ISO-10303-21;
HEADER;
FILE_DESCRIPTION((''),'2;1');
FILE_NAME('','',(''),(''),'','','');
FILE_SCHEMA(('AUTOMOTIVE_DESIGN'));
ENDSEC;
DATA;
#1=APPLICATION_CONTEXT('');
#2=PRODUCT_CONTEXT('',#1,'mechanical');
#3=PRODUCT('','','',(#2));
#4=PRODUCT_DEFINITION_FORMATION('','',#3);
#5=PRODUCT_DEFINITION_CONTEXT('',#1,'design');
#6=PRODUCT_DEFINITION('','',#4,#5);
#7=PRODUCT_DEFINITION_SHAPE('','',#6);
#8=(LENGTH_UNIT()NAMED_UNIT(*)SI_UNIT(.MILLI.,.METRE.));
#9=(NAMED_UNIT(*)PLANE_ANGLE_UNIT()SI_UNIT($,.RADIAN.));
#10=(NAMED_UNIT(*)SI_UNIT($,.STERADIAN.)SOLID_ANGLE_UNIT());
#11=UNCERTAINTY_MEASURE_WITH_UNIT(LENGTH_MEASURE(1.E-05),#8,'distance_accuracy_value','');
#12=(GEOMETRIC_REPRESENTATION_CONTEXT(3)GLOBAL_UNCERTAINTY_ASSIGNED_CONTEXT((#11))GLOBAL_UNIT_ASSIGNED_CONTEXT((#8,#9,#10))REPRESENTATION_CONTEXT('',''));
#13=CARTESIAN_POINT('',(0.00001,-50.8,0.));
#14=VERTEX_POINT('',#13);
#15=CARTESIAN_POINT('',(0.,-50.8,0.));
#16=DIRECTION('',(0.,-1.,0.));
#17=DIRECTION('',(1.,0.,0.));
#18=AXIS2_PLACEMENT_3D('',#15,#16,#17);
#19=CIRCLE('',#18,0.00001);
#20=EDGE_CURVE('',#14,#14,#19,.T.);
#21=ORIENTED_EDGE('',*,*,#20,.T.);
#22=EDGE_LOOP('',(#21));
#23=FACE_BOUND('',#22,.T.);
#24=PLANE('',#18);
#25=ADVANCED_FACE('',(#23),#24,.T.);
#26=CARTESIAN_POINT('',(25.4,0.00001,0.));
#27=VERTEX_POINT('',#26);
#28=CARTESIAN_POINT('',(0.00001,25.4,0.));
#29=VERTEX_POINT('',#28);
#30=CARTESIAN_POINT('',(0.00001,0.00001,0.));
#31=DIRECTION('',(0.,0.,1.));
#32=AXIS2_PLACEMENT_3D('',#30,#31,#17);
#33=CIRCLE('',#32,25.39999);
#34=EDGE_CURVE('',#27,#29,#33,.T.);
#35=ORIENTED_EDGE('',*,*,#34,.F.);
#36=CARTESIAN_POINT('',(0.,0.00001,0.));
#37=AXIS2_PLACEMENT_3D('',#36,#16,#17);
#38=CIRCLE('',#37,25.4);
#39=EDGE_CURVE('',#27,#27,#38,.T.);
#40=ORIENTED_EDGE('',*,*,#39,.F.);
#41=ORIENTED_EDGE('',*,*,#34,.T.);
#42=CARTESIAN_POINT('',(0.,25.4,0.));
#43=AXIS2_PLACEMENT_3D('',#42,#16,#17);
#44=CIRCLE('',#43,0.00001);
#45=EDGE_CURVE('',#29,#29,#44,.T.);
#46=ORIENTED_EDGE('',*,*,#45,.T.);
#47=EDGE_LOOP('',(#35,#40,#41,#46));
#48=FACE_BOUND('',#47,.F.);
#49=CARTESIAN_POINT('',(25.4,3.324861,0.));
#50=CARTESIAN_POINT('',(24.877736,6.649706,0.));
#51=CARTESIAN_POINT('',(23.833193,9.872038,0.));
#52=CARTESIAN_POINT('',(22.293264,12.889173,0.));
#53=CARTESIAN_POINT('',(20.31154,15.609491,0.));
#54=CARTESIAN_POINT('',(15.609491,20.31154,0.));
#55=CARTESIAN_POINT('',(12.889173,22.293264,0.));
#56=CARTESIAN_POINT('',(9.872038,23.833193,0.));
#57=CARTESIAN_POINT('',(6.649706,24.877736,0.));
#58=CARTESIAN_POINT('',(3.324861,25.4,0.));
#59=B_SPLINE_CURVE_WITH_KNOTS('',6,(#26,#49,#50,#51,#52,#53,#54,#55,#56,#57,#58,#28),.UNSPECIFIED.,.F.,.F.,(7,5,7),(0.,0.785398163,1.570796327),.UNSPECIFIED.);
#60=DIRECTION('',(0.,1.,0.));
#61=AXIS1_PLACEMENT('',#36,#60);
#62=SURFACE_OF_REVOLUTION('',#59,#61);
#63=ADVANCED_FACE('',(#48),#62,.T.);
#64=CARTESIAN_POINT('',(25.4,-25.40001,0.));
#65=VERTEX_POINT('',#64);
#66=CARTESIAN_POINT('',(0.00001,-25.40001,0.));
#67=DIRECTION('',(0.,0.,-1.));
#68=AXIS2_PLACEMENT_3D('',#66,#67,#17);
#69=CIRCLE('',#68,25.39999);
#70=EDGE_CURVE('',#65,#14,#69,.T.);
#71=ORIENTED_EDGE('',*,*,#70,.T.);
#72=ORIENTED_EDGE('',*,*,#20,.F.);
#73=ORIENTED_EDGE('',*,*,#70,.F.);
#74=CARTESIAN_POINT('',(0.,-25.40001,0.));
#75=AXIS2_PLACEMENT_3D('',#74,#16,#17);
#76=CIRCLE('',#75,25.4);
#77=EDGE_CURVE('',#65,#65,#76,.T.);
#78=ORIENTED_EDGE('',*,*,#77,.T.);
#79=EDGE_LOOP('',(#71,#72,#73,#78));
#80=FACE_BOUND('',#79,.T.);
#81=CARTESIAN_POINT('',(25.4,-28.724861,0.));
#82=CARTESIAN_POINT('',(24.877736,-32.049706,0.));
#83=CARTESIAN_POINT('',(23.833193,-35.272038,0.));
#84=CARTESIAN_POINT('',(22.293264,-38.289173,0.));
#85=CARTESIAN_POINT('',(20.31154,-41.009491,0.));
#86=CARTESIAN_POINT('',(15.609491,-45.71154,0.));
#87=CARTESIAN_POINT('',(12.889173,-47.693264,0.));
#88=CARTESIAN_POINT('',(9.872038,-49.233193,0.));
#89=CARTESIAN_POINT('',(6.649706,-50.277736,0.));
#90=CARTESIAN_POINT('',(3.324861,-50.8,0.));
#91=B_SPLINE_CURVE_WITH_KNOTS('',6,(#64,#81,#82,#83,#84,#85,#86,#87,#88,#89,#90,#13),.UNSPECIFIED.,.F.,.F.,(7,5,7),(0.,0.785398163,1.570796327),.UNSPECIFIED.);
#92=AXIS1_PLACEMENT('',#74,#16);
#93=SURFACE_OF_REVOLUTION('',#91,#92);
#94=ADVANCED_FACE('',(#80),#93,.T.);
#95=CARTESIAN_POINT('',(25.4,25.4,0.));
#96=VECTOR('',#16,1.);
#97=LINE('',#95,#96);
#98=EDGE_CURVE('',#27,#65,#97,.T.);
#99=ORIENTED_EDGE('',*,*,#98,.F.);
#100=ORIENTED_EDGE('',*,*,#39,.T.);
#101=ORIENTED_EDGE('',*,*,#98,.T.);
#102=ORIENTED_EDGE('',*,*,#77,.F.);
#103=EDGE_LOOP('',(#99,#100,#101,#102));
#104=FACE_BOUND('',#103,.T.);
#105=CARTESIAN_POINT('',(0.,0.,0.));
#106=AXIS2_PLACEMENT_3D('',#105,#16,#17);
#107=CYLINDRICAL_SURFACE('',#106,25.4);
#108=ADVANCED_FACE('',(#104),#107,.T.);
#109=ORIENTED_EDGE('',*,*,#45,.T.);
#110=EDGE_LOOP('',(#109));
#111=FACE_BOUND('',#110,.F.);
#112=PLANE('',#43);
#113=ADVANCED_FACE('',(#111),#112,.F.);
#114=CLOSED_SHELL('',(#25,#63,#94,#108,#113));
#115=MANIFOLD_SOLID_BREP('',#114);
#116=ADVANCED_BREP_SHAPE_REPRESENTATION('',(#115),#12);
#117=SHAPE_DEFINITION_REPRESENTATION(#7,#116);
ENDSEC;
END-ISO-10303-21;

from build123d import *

# Parameters (mm, degrees)
F0_R          = 25.4
F1_DEPTH      = 50.8
F1_DEPTH_BACK = 25.4
F2_R          = 25.39999


# Not quite as in the source:
# - a fillet or chamfer is up to 0.001 mm smaller than in the source, because OpenCascade refuses the exact size


with BuildPart() as f1:
    # F0 (on Front) → F1 (new body, two sides)
    with BuildSketch(Plane.XZ) as f1_sk:
        Circle(F0_R)
    extrude(amount=F1_DEPTH)
    extrude(f1_sk.sketch, amount=-F1_DEPTH_BACK)

    # F2 (radius 25.4 in the source; OpenCascade refuses exactly that, so slightly less here)
    f2_edges = [f1.edges().sort_by_distance(p)[0] for p in [
        (-25.4, 25.4, 0),
        (-25.4, -50.8, 0),
    ]]
    fillet(f2_edges, radius=F2_R)


solid = f1.part
